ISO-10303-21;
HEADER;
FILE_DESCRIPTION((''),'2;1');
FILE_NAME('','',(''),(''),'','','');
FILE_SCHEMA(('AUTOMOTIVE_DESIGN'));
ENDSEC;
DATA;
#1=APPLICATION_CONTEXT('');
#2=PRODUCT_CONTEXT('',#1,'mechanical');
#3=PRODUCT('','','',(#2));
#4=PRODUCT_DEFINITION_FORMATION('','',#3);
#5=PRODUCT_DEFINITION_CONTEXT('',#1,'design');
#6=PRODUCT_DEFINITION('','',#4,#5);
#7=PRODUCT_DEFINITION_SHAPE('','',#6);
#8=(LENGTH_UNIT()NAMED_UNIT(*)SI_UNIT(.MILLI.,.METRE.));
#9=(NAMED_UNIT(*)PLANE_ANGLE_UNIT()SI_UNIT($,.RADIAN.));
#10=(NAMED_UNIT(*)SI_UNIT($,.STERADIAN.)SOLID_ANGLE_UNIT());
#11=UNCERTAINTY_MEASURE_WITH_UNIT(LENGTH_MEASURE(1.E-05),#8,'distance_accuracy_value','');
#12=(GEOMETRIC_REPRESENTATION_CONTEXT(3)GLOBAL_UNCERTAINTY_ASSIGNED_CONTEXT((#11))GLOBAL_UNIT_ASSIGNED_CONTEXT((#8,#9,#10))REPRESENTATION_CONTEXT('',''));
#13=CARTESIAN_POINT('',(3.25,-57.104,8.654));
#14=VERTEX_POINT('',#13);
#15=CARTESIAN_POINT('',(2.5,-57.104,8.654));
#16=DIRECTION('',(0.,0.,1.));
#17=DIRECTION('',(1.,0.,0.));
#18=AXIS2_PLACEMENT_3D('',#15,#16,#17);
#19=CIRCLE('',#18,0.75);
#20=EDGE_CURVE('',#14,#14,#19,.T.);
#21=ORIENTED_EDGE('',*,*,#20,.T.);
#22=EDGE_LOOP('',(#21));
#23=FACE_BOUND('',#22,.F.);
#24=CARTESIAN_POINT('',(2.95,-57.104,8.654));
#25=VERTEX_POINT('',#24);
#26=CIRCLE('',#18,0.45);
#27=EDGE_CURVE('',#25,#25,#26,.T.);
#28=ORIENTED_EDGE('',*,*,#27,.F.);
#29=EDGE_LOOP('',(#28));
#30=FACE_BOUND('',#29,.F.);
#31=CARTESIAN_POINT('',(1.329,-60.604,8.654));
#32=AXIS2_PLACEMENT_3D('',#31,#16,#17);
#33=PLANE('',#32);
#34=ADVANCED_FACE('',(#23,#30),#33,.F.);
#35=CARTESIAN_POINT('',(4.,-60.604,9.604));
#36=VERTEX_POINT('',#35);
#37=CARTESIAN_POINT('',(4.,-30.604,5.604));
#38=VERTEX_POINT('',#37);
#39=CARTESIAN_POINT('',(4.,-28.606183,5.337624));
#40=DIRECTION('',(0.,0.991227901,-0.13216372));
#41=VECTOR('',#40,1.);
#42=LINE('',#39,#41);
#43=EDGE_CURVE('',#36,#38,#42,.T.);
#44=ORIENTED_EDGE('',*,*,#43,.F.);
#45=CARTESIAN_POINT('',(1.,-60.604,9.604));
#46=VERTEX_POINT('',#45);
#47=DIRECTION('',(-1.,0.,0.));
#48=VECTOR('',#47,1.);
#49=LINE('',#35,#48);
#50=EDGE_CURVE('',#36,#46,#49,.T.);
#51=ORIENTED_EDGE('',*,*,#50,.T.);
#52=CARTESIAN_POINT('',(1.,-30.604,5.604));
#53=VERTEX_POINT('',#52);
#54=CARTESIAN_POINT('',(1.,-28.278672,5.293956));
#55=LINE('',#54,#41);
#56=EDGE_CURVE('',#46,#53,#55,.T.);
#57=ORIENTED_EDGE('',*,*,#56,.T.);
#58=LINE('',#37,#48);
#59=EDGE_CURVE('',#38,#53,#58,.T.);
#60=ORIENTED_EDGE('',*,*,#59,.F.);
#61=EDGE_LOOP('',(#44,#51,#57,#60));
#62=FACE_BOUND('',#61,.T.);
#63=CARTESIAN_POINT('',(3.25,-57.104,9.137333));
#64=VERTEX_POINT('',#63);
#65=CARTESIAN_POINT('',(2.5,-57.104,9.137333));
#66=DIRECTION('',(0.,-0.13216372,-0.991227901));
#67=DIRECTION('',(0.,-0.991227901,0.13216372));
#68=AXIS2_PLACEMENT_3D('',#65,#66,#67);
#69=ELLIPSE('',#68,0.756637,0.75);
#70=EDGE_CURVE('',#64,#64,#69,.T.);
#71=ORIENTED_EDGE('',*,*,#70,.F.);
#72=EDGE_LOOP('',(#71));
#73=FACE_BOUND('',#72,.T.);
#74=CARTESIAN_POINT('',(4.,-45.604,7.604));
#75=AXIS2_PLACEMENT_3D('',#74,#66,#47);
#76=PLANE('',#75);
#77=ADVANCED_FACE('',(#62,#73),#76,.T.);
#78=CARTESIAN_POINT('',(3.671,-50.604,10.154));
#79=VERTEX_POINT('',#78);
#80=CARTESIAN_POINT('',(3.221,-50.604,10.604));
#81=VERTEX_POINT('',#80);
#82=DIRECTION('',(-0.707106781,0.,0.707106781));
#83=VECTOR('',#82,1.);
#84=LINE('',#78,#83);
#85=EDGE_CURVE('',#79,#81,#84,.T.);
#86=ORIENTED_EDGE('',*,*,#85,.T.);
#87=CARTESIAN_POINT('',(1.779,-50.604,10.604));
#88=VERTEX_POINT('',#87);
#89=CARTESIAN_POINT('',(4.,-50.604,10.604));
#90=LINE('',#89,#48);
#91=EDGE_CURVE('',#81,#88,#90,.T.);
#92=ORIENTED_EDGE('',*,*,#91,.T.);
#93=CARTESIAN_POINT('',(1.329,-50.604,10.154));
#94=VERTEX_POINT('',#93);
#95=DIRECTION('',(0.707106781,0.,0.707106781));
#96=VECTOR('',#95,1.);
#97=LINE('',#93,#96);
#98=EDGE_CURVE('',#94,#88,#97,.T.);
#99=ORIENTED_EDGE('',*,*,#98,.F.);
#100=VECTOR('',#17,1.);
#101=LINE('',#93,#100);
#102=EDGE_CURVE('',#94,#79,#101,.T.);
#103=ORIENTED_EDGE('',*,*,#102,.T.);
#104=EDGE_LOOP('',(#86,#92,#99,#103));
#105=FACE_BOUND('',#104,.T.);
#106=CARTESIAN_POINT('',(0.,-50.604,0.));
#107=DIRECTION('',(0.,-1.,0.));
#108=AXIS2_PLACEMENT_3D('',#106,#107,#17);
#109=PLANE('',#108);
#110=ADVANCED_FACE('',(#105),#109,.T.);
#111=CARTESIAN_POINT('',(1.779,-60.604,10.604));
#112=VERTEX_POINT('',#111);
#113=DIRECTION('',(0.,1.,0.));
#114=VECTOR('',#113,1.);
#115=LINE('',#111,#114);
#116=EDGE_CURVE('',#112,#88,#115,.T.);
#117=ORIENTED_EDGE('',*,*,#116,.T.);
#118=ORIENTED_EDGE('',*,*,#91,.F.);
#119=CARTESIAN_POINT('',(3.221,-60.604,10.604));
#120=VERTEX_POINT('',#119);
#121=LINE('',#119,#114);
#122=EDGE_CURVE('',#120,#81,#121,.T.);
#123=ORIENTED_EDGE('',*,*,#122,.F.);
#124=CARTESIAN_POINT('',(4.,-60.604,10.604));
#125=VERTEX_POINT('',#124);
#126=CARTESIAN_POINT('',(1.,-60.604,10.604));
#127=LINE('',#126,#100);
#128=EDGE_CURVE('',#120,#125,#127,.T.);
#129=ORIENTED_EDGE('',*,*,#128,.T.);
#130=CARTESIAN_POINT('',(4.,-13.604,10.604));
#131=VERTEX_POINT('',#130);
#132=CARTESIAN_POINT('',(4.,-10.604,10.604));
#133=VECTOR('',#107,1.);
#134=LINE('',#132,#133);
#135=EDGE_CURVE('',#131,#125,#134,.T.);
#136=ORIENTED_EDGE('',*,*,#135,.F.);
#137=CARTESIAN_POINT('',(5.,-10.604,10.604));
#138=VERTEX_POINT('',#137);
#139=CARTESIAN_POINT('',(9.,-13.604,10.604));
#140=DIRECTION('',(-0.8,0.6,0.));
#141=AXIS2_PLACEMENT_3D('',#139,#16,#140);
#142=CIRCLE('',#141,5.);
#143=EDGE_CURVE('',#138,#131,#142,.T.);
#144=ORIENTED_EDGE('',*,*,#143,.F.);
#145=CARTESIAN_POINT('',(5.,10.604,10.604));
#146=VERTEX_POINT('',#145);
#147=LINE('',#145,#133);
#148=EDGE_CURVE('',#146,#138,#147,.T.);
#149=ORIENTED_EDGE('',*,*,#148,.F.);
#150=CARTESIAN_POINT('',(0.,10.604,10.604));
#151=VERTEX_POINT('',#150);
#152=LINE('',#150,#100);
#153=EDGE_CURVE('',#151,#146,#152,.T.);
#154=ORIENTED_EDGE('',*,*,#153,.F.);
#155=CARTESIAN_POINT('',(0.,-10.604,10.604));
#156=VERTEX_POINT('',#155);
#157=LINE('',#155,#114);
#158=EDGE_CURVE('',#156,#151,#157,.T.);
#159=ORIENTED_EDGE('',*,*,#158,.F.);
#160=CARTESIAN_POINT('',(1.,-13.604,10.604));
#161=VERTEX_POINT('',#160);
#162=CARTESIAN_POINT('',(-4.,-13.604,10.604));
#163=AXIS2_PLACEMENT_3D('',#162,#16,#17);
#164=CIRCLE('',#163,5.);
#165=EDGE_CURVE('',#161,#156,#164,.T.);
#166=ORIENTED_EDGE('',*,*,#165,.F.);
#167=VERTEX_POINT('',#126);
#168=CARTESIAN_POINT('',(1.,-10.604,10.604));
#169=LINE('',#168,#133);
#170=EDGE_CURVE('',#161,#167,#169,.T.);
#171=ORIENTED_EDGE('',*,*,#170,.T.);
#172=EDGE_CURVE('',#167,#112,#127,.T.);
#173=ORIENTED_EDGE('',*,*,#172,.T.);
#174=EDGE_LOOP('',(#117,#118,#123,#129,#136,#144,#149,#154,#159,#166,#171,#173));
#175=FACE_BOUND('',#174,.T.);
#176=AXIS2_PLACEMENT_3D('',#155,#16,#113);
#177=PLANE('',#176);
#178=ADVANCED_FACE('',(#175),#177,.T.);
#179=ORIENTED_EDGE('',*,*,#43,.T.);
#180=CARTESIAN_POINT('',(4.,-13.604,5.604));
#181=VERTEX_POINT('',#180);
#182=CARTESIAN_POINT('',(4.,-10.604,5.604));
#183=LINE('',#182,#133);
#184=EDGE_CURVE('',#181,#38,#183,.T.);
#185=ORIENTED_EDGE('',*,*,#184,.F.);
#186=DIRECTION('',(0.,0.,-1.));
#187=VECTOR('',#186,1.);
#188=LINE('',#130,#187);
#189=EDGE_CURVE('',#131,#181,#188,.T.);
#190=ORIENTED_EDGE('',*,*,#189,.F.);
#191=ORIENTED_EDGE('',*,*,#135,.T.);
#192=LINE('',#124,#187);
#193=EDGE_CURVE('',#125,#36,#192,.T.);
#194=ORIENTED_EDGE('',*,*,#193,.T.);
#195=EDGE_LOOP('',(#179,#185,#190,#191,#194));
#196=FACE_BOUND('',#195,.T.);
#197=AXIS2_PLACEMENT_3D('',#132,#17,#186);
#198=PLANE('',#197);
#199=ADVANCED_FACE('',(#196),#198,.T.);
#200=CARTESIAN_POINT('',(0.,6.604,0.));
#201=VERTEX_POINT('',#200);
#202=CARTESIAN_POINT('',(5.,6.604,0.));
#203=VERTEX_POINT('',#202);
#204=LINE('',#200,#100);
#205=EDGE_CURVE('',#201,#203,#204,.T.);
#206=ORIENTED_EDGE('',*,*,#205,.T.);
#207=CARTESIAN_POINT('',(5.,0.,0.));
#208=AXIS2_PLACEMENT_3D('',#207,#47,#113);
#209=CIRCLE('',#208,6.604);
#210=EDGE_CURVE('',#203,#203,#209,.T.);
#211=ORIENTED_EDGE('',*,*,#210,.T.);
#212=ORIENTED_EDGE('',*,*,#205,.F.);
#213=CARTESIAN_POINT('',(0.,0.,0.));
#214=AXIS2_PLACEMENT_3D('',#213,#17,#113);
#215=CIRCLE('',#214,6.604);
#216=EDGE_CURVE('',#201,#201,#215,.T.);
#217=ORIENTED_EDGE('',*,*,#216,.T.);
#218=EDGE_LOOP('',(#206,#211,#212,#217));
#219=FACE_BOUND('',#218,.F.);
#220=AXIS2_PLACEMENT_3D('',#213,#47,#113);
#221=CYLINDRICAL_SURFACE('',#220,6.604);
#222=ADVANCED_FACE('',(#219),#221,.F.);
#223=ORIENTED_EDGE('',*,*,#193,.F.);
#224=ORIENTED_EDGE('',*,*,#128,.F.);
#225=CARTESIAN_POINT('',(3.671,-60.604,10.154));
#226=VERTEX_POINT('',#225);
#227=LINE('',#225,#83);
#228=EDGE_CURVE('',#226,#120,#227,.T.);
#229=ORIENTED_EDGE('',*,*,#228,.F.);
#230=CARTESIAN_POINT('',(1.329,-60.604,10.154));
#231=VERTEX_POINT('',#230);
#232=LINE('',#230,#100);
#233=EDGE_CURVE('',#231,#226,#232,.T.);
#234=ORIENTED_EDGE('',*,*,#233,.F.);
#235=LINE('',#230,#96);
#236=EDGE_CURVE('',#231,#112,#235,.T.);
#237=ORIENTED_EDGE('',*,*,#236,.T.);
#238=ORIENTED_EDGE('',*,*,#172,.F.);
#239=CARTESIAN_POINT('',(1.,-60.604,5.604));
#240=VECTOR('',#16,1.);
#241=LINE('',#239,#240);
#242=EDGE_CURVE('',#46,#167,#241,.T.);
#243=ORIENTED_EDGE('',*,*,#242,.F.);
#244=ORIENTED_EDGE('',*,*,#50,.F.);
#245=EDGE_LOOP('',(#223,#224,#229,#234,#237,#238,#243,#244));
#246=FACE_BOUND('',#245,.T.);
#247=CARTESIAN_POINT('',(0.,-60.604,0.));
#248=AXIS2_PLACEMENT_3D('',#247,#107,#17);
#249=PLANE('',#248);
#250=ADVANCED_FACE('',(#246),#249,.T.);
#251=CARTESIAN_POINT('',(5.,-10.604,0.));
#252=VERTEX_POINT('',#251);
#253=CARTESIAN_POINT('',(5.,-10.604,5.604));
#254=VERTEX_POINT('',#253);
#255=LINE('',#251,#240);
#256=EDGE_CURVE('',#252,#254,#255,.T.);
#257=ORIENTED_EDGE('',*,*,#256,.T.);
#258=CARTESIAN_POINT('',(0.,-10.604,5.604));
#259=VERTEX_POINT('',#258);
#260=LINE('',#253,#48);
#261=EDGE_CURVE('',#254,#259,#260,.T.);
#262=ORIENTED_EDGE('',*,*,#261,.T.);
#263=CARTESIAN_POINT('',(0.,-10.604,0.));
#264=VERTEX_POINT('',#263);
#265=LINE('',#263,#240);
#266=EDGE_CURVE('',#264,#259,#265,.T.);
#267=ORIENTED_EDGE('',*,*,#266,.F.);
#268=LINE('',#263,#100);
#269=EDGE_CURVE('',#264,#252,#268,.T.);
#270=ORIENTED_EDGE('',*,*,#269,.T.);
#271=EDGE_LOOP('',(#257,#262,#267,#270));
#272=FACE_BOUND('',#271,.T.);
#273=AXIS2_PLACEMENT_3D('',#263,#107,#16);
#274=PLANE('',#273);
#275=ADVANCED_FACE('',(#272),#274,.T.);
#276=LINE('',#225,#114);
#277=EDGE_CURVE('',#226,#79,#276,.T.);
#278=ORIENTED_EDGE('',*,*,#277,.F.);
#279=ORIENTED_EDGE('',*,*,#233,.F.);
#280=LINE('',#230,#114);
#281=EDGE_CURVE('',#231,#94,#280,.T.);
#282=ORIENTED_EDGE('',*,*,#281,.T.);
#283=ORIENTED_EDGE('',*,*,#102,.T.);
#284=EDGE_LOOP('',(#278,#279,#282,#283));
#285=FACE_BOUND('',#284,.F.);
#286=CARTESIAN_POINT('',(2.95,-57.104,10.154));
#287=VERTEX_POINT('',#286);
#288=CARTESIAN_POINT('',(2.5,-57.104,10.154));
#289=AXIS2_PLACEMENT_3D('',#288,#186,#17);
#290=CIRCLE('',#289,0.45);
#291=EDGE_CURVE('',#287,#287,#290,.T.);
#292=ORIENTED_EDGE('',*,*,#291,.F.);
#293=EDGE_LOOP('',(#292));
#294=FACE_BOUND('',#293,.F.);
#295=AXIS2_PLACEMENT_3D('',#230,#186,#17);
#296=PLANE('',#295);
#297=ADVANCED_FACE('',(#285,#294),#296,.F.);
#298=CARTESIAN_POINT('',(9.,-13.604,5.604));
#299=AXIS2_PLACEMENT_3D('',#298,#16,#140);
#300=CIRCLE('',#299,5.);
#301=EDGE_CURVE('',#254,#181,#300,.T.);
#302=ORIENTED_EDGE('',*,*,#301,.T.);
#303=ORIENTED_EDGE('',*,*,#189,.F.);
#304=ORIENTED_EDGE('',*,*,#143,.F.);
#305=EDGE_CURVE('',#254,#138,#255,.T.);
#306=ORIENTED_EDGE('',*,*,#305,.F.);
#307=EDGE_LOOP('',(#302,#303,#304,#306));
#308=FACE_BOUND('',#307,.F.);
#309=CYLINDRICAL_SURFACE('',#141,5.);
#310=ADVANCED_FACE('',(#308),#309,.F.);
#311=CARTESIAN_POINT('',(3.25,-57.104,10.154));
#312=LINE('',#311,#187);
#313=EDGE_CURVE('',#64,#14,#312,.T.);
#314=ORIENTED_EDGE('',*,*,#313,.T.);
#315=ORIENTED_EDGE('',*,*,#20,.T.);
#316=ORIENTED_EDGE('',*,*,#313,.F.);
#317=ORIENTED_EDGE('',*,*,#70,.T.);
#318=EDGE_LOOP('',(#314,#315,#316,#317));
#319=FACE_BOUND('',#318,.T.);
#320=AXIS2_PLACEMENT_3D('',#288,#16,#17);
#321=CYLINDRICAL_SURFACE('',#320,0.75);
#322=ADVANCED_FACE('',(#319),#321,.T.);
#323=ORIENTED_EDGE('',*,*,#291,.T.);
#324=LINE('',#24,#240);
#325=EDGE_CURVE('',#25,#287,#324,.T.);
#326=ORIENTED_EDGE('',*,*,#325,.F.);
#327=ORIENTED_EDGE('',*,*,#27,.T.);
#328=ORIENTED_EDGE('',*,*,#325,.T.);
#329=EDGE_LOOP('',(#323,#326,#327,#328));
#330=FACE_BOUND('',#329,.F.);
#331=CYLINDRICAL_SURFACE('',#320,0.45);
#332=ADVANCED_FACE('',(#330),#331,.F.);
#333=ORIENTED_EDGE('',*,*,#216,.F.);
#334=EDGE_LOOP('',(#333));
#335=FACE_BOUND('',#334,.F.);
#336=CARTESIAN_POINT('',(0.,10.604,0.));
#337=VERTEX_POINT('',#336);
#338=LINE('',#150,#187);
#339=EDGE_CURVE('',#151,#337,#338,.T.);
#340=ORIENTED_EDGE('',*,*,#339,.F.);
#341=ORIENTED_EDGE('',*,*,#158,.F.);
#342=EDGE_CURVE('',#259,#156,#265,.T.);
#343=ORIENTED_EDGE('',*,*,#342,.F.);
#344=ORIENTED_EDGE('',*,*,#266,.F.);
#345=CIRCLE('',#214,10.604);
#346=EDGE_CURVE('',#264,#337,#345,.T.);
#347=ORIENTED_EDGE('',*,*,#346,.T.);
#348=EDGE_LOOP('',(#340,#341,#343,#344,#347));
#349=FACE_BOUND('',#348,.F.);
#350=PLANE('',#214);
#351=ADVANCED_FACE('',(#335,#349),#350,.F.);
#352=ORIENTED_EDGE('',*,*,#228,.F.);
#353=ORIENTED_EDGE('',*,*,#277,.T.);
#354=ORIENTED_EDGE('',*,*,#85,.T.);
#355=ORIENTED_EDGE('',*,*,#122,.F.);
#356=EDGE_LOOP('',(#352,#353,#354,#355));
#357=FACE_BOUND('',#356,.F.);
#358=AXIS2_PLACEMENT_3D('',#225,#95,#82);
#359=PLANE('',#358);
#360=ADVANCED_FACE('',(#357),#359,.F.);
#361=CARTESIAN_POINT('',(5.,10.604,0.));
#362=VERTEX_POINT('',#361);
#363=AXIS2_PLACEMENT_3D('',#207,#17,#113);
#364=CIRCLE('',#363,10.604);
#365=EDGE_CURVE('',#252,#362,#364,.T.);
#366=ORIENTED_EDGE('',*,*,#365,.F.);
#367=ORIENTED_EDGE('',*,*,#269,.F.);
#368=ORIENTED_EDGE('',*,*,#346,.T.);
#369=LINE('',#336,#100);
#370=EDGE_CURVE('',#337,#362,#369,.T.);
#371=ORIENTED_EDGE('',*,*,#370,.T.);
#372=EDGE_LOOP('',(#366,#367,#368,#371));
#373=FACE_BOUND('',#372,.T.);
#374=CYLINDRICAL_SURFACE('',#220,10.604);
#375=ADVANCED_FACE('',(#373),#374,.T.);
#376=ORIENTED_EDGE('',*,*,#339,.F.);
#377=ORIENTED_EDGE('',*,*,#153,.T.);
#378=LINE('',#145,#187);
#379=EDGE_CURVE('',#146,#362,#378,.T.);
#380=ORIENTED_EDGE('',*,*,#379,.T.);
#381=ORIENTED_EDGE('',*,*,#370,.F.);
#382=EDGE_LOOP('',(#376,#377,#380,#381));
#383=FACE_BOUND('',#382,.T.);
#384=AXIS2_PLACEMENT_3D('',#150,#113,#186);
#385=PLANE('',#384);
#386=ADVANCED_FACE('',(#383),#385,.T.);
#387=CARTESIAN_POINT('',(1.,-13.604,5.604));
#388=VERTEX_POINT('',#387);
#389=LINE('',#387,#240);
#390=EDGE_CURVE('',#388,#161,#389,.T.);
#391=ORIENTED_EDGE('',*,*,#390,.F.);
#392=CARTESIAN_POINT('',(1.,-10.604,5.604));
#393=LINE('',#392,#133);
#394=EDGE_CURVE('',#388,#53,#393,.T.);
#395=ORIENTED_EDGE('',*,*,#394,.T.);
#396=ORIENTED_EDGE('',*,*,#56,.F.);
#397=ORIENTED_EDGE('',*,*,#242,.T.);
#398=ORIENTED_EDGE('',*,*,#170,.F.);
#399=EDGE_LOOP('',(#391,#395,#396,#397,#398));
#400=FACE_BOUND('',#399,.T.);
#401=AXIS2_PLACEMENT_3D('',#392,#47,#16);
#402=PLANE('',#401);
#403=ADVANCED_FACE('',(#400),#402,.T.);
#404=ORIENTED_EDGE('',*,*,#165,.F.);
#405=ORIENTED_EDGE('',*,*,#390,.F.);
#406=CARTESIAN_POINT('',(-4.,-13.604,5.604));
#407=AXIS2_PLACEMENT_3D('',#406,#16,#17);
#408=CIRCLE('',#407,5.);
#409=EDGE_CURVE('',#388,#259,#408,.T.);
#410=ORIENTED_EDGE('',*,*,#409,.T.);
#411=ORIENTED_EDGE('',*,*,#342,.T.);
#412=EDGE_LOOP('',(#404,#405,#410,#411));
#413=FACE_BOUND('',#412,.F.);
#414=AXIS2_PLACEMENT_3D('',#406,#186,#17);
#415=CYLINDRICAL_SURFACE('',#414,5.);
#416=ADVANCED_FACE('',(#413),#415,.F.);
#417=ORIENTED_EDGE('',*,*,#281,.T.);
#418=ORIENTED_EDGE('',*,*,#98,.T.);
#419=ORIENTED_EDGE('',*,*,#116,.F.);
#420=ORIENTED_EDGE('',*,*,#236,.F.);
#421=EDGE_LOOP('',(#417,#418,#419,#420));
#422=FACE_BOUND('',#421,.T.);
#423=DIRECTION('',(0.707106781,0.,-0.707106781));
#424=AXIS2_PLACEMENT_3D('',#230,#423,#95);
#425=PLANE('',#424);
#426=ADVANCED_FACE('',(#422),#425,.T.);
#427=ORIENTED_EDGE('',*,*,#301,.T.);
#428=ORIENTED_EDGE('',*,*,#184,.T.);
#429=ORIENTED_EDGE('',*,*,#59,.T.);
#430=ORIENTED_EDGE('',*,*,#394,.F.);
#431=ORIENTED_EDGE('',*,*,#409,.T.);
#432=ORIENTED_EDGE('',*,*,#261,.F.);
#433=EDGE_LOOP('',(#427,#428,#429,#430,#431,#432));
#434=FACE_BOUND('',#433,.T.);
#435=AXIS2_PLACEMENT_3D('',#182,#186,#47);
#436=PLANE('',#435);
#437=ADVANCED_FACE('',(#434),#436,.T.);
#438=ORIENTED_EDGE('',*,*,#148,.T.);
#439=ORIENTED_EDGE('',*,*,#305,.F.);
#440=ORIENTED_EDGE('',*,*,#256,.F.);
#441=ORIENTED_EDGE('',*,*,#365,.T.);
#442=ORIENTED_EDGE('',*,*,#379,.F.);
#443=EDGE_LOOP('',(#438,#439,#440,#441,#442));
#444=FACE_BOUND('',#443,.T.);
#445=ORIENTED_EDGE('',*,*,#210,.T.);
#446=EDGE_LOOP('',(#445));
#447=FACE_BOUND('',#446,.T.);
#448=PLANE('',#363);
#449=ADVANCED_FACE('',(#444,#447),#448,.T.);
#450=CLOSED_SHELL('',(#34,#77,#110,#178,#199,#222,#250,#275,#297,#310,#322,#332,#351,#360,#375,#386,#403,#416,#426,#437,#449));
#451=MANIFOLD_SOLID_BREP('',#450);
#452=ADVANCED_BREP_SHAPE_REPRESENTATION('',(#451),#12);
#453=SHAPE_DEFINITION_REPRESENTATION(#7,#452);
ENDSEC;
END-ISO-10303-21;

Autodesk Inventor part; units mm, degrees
ref_plane "YZ Plane" through (0, 0, 0) normal (1, 0, 0) x (0, 1, 0)
ref_plane "XZ Plane" through (0, 0, 0) normal (0, 1, 0) x (-1, 0, 0)
ref_plane "XY Plane" through (0, 0, 0) normal (0, 0, 1) x (1, 0, 0)
sketch "Sketch1" plane through (0, 0, 0) normal (1, 0, 0) x (0, 1, 0)
  circle A0 centre (0, 0) radius 6.604
  circle A1 centre (0, 0) radius 10.604
  line L0 (10.604, 0) -> (-10.604, 0)
  line L1 (-10.604, 0) -> (-10.604, 10.604)
  line L2 (-10.604, 10.604) -> (10.604, 10.604)
  line L3 (10.604, 10.604) -> (10.604, 0)
  point P0 (-10.604, 0)
  dimension "d1" = 21.208
  dimension "d0" = 13.208
extrude "Extrusion1" add sketch "Sketch1" along normal blind 5 contours L0 A1 A0 | A0 L0 A1 | A1 L2 L3 | L1 L2 A1
sketch "Sketch2" plane through (0, -10.604, 0) normal (0, -1, 0) x (1, 0, 0)
  line L0 (0, 0) -> (0, 10.604) projected
  line L1 (5, 0) -> (5, 10.604) projected
  line L2 (1, 10.604) -> (4, 10.604)
  line L3 (4, 10.604) -> (4, 5.604)
  line L4 (4, 5.604) -> (1, 5.604)
  line L5 (1, 5.604) -> (1, 10.604)
  line L6 (0, 10.604) -> (5, 10.604) projected
  dimension "d16" = 1
  dimension "d17" = 1
  dimension "d18" = 5
extrude "Extrusion2" add sketch "Sketch2" along normal blind 50
sketch "Sketch3" plane through (0, -60.604, 0) normal (0, -1, 0) x (1, 0, 0)
  line L0 (1.329, 10.154) -> (3.671, 10.154)
  line L1 (1.329, 10.154) -> (1.779, 10.604)
  line L2 (3.671, 10.154) -> (3.221, 10.604)
  line L3 (1.329, 10.154) -> (1.658, 10.154) construction
  line L4 (3.671, 10.154) -> (4, 10.154) construction
  line L5 (4, 10.604) -> (1, 10.604) projected
  line L6 (1.329, 10.154) -> (1, 10.154) construction
  line L7 (1, 10.604) -> (1, 5.604) construction
  line L8 (4, 5.604) -> (4, 10.604) construction
  point P0 (0, 0)
  dimension "d6" = 2.342
  dimension "d7" = 45
  dimension "d8" = 45
  dimension "d19" = 0.45
extrude "Extrusion3" cut sketch "Sketch3" against normal blind 10
chamfer "Chamfer1" distance 4 distance2 30 1 edges at (2.5, -60.604, 5.604) measured on face at (2.8903, -60.604, 7.1207)
fillet "Fillet1" radius 5 2 edges at (4, -10.604, 8.104) (1, -10.604, 8.104)
sketch "Sketch4" plane through (1.329, -60.604, 10.154) normal (0, 0, 1) x (1, 0, 0)
  circle A0 centre (1.171, 3.5) radius 0.45
  line L0 (1.171, 3.5) -> (2.671, 3.5) construction
  line L1 (1.171, 3.5) -> (-0.329, 3.5)
  line L2 (-0.329, 47) -> (-0.329, 0) construction
  line L3 (2.671, 47) -> (2.671, 0) construction
  line L4 (2.342, 0) -> (0, 0) construction
  point P0 (-1.329, 60.604)
  dimension "d21" = 0.9
  dimension "d22" = 3.5
extrude "Extrusion4" cut sketch "Sketch4" against normal blind 10
sketch "Sketch5" plane through (1.329, -60.604, 10.154) normal (0, 0, 1) x (1, 0, 0)
  circle A0 centre (1.171, 3.5) radius 0.45 projected
  circle A1 centre (1.171, 3.5) radius 0.75
  point P0 (-1.329, 60.604)
  dimension "d25" = 1.5
extrude "Extrusion5" add sketch "Sketch5" against normal blind 1.5
equation "\"d17\" = d16"
equation "\"d8\" = d7"
properties part number "washing_arm"
